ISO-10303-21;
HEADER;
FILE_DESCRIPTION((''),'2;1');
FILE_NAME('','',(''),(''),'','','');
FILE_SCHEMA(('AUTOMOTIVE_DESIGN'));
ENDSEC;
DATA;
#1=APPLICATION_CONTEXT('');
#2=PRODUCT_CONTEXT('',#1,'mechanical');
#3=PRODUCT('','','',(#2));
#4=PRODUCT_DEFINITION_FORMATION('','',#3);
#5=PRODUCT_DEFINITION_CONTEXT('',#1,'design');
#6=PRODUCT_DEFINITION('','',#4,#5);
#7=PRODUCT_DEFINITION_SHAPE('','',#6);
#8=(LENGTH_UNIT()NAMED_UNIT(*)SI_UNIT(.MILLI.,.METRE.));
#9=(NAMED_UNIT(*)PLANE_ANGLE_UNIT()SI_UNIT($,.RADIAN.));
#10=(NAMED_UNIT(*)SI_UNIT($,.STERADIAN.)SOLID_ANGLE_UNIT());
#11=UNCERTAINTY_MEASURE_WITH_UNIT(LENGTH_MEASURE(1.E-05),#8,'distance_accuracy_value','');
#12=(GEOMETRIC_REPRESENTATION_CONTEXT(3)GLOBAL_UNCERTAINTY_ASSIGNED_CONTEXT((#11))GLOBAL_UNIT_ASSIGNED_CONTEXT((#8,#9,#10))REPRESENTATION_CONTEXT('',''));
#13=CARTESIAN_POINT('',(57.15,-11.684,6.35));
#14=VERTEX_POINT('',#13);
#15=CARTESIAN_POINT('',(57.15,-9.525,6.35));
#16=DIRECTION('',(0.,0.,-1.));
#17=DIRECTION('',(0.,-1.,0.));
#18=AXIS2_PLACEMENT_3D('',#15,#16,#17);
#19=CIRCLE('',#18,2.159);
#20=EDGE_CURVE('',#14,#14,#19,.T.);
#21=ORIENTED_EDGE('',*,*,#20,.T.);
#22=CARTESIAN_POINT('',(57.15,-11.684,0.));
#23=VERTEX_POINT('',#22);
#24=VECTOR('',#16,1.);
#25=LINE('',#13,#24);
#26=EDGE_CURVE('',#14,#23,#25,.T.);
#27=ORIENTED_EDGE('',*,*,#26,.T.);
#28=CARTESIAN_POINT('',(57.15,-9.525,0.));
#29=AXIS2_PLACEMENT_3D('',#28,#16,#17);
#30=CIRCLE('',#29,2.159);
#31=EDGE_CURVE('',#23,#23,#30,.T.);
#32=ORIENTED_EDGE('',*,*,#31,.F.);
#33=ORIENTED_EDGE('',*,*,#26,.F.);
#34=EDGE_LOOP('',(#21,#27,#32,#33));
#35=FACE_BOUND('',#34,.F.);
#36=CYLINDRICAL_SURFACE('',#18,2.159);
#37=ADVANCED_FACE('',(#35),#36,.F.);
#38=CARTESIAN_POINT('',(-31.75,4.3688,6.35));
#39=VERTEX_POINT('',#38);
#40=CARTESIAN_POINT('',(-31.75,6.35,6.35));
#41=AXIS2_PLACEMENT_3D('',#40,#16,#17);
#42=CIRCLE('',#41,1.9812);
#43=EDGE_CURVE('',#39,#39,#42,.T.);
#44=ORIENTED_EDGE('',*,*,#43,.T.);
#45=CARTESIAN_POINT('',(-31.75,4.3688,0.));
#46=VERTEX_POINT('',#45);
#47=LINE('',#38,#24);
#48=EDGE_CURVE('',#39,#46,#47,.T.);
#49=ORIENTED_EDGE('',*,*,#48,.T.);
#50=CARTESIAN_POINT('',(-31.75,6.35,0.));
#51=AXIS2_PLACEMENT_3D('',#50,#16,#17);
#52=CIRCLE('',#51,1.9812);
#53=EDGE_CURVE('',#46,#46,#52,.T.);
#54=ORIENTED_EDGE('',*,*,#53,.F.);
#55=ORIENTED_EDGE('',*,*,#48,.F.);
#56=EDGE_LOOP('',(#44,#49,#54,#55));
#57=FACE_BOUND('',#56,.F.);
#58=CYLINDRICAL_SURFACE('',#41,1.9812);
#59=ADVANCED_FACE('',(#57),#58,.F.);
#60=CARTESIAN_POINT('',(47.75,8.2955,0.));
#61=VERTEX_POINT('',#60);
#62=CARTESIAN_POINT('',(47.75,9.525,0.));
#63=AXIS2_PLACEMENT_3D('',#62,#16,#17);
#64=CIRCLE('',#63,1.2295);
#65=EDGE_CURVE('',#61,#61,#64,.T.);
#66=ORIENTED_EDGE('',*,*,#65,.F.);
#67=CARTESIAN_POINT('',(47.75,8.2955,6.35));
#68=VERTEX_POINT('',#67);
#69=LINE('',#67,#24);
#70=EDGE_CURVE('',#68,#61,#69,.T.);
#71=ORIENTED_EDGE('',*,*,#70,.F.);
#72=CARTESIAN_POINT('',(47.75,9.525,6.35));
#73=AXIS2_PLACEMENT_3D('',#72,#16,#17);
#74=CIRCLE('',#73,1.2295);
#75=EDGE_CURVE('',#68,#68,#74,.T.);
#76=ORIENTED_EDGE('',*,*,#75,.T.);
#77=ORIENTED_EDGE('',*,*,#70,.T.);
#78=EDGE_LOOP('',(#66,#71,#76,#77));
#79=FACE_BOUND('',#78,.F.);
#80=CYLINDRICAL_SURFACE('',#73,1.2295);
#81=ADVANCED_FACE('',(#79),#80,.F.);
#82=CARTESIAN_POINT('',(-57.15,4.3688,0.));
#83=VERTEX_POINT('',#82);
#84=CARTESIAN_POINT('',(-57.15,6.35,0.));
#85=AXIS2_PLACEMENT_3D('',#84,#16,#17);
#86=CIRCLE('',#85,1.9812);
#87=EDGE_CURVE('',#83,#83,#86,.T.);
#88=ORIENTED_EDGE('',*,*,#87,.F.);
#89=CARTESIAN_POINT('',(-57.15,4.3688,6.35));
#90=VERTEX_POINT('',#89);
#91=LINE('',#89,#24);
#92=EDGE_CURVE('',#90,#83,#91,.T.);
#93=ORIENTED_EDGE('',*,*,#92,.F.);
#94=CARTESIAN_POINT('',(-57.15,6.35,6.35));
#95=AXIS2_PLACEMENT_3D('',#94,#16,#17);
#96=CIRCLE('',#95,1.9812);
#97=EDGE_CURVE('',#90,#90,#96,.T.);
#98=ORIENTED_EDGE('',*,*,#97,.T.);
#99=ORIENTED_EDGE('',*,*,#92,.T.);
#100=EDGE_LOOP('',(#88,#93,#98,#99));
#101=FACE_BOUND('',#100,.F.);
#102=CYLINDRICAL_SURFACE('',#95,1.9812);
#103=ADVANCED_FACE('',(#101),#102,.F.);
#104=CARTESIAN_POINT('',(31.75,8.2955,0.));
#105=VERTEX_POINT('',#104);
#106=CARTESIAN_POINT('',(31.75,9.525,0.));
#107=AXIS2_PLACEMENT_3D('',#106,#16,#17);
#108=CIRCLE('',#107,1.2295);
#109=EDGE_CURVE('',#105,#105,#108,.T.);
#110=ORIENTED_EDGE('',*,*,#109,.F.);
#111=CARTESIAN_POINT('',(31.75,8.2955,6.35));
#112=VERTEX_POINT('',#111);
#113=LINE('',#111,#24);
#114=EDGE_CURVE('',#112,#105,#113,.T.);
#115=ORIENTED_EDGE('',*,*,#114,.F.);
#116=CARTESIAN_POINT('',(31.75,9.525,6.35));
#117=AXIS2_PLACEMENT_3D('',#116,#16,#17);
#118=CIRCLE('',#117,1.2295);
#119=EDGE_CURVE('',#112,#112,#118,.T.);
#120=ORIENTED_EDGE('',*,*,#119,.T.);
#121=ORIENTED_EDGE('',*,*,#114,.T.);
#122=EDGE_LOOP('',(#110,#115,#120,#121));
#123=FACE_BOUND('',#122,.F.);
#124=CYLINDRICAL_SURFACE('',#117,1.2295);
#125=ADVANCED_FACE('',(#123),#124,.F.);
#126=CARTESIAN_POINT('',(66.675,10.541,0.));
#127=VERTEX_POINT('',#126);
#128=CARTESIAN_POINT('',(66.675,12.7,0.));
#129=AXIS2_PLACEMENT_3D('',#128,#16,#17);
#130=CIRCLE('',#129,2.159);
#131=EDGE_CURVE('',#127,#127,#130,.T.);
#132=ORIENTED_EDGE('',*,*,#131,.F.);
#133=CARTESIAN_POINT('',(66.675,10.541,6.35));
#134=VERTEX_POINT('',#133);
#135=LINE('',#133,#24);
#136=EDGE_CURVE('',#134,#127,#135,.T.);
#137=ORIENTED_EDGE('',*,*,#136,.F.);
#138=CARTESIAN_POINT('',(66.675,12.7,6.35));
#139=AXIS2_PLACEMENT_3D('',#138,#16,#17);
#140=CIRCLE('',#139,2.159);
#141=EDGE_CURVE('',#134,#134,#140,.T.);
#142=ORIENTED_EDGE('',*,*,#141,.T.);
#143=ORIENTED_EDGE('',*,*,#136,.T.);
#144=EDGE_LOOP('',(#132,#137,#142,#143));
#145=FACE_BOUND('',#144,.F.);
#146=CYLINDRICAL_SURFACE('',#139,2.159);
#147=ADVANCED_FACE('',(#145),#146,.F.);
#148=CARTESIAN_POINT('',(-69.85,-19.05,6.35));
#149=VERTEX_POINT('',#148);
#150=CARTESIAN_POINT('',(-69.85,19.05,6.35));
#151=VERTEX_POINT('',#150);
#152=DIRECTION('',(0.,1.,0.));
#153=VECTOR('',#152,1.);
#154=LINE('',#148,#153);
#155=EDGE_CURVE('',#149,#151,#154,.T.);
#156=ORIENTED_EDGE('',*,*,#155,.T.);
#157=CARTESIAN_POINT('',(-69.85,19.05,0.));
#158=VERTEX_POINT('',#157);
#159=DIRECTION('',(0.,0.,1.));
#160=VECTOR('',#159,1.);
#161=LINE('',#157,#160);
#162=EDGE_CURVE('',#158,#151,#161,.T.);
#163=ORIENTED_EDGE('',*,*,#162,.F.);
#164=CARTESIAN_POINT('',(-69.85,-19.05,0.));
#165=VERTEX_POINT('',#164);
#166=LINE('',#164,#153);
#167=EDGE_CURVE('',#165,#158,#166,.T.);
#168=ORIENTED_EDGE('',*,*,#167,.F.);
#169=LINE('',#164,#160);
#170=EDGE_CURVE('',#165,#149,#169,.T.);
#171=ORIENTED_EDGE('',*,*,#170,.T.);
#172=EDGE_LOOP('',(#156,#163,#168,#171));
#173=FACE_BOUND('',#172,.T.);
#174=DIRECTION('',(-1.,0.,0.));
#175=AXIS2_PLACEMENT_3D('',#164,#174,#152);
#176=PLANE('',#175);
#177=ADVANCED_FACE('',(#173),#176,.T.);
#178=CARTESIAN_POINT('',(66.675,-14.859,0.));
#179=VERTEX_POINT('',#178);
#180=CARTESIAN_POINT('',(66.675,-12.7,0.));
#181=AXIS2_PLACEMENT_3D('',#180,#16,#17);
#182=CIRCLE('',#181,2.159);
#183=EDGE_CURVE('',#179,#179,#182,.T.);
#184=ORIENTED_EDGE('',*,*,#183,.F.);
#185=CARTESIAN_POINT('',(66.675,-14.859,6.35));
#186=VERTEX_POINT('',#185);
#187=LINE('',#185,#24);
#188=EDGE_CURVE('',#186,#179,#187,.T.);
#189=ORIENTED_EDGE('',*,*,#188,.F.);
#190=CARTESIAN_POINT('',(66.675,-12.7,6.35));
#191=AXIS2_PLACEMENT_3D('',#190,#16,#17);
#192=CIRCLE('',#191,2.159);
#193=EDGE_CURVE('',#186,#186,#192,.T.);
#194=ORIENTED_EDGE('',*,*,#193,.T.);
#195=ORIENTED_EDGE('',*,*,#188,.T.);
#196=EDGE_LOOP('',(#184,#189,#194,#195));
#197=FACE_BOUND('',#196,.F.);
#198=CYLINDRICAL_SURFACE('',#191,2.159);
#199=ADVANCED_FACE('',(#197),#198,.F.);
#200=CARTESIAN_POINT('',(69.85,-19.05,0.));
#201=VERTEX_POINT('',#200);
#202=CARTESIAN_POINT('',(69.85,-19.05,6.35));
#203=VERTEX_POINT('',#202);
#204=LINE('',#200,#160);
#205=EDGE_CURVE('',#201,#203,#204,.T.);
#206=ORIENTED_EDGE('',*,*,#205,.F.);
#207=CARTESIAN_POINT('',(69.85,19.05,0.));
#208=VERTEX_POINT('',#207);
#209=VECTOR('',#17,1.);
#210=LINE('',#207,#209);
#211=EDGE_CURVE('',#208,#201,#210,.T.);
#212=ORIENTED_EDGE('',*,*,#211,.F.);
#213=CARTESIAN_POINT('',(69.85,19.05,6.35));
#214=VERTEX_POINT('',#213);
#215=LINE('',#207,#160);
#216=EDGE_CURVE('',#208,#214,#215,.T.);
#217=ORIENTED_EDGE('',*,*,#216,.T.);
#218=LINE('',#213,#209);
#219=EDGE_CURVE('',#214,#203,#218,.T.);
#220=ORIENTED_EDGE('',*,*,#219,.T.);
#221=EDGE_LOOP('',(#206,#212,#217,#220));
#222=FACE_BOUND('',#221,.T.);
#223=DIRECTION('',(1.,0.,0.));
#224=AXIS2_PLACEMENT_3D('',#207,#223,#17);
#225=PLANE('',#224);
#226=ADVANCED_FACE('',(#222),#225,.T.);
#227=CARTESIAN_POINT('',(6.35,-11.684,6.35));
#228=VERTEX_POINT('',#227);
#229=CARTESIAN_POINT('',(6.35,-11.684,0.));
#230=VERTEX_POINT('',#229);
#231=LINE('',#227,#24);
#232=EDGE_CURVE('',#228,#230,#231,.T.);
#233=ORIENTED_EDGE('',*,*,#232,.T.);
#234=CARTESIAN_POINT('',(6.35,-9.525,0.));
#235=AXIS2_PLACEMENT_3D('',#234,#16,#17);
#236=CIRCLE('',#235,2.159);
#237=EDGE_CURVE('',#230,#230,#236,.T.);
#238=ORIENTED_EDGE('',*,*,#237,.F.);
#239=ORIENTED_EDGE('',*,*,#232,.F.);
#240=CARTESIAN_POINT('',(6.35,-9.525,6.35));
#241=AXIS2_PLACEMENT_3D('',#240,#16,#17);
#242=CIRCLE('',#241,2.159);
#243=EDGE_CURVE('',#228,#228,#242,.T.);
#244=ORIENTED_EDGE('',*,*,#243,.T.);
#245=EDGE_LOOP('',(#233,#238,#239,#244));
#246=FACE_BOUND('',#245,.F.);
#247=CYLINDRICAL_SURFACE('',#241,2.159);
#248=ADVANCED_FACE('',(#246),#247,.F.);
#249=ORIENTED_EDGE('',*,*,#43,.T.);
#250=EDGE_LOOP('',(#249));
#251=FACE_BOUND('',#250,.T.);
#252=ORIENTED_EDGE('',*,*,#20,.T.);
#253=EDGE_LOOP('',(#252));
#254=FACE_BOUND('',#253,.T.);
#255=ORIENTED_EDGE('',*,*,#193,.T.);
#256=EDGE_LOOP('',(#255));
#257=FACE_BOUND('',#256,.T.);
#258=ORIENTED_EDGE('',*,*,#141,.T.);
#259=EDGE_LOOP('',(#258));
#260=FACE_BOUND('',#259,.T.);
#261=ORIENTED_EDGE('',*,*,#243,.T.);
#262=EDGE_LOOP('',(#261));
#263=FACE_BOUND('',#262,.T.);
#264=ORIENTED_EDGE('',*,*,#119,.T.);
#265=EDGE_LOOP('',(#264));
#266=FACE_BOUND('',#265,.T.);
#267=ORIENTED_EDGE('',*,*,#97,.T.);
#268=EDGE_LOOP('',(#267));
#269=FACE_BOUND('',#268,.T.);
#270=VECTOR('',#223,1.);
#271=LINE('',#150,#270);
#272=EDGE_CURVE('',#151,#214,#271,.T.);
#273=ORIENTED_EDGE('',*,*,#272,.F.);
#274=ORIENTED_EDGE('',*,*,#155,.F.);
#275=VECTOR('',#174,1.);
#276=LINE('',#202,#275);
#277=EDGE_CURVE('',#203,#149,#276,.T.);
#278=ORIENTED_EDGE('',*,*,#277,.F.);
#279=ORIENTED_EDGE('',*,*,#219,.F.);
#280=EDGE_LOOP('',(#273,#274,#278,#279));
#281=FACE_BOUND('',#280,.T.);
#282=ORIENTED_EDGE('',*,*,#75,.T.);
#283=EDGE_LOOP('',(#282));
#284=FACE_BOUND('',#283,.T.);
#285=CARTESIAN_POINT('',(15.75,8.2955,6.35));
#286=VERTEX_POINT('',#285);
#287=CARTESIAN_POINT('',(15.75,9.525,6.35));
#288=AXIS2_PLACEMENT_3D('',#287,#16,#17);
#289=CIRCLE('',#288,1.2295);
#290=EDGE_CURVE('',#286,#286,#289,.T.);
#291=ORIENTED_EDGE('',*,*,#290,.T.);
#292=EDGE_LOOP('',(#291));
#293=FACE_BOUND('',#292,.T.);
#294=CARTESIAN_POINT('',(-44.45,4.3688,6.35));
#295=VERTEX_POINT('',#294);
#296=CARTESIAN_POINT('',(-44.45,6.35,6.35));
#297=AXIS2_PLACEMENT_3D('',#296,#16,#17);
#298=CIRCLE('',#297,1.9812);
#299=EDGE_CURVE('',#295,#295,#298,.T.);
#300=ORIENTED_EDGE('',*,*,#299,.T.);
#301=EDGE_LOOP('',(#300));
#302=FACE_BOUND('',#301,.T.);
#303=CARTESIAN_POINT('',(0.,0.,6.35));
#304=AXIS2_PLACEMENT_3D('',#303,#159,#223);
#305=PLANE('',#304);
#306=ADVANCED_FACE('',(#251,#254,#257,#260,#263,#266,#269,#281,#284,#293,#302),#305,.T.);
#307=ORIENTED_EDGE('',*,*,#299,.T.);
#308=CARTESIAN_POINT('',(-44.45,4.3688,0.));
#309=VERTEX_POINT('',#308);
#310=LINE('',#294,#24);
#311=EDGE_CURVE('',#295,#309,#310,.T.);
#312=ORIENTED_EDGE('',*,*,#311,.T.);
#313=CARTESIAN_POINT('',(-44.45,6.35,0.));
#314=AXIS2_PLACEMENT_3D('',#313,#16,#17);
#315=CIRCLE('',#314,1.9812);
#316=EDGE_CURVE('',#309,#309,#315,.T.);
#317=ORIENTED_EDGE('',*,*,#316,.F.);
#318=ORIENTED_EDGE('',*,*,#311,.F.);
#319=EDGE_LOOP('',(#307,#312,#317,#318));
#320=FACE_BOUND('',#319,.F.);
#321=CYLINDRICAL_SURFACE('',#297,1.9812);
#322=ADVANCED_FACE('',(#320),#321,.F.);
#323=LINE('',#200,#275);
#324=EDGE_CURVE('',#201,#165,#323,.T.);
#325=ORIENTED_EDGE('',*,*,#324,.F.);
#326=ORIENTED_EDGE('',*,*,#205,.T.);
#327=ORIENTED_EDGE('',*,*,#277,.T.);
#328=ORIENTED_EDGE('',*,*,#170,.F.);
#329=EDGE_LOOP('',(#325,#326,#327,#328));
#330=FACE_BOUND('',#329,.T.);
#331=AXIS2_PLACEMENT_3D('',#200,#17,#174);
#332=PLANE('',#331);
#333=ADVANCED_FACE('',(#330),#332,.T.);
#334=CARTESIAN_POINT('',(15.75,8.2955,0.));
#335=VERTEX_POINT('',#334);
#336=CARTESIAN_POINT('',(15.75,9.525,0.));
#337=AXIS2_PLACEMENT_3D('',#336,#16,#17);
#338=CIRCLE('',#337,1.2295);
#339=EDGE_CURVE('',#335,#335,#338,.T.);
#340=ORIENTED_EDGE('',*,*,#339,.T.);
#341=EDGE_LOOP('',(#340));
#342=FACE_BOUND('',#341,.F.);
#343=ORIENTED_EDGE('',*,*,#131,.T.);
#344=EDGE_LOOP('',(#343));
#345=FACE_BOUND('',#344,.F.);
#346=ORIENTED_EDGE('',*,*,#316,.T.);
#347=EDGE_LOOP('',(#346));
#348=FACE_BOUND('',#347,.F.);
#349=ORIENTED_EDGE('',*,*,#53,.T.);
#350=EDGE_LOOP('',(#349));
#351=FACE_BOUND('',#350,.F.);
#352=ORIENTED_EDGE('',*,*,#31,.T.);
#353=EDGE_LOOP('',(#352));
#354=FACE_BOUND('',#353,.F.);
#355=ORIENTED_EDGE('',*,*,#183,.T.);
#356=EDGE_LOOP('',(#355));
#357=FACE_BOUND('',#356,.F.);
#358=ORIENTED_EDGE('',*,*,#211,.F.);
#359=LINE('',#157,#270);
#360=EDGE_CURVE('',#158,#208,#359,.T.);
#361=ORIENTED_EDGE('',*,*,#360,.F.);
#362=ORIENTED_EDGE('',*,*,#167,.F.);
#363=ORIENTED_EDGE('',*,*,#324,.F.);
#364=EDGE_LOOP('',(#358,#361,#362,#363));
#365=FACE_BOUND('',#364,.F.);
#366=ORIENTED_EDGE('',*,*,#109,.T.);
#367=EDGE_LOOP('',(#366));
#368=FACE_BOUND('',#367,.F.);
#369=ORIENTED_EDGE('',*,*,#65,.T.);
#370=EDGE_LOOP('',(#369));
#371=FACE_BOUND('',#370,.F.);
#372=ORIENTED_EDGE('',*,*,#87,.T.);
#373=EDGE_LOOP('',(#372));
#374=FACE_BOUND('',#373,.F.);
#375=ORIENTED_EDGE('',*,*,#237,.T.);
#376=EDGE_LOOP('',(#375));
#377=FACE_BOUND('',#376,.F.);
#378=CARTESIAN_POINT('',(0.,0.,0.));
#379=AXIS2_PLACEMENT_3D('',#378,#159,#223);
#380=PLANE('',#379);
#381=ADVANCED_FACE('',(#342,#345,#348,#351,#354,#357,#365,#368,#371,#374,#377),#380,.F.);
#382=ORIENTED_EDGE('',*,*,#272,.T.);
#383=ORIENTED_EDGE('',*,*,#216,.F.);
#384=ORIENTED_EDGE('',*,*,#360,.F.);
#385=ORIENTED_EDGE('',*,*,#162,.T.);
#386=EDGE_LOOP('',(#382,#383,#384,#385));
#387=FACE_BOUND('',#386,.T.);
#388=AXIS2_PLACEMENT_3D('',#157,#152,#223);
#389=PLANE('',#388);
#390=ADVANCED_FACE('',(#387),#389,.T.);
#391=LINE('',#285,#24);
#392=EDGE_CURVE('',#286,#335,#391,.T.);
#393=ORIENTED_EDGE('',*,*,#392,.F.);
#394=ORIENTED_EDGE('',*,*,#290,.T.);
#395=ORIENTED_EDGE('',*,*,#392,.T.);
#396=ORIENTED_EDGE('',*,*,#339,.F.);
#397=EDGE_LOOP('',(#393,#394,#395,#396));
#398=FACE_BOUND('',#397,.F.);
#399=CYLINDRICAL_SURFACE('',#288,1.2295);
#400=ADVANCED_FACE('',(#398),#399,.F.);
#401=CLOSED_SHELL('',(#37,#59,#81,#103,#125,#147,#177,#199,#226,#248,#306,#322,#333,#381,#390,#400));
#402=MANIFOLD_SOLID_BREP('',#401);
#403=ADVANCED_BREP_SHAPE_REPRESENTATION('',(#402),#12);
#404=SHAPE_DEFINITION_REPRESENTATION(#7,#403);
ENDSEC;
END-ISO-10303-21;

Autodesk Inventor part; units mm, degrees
ref_plane "YZ Plane" through (0, 0, 0) normal (1, 0, 0) x (0, 1, 0)
ref_plane "XZ Plane" through (0, 0, 0) normal (0, 1, 0) x (-1, 0, 0)
ref_plane "XY Plane" through (0, 0, 0) normal (0, 0, 1) x (1, 0, 0)
sketch "Sketch1" plane through (0, 0, 0) normal (0, 0, 1) x (1, 0, 0)
  line L0 (69.85, -19.05) -> (-69.85, -19.05)
  line L1 (-69.85, -19.05) -> (-69.85, 19.05)
  line L2 (-69.85, 19.05) -> (69.85, 19.05)
  line L3 (69.85, 19.05) -> (69.85, -19.05)
  line L4 (69.85, -19.05) -> (-69.85, 19.05) construction
  line L5 (-69.85, -19.05) -> (69.85, 19.05) construction
  point P0 (0, 0)
  dimension "d0" = 139.7
  dimension "d1" = 38.1
extrude "Extrusion1" add sketch "Sketch1" along normal blind 6.35
sketch "Sketch2" plane through (0, 0, 6.35) normal (0, 0, 1) x (1, 0, 0)
  line L0 (-69.85, 19.05) -> (-69.85, -19.05) projected
  line L1 (69.85, 19.05) -> (-69.85, 19.05) projected
  point P0 (0, 0)
  point P1 (-57.15, 6.35)
  point P2 (-44.45, 6.35)
  point P3 (-31.75, 6.35)
  point P4 (-69.85, 0)
  dimension "d5" = 12.7
  dimension "d6" = 12.7
  dimension "d14" = 12.7
  dimension "d15" = 12.7
hole "Hole1" at (-57.15, 6.35, 6.35) at (-44.45, 6.35, 6.35) at (-31.75, 6.35, 6.35) direction (0, 0, -1) diameter 3.9624 end through all thread size "10-32 UNF" class "2B" standard "ANSI Unified Screw Threads"
sketch "Sketch3" plane through (0, 0, 6.35) normal (0, 0, 1) x (1, 0, 0)
  line L0 (69.85, 19.05) -> (-69.85, 19.05) projected
  line L1 (-69.85, -19.05) -> (69.85, -19.05) projected
  line L2 (69.85, -19.05) -> (69.85, 19.05) projected
  line L3 (6.35, -9.525) -> (57.15, -9.525) construction
  line L4 (-69.85, 19.05) -> (-69.85, -19.05) construction
  point P0 (0, 0)
  point P1 (66.675, 12.7)
  point P2 (66.675, -12.7)
  point P3 (-69.85, 0)
  dimension "d16" = 6.35
  dimension "d17" = 6.35
  dimension "d18" = 3.175
  dimension "d39" = 50.8
  dimension "d41" = 28.575
  dimension "d43" = 12.7
hole "Hole2" at (66.675, 12.7, 6.35) at (66.675, -12.7, 6.35) at (6.35, -9.525, 6.35) at (57.15, -9.525, 6.35) direction (0, 0, -1) diameter 4.318 end through all clearance for "Flat Head Machine Screw (82)" size "#8" standard "Ansi Unified Screw Threads"
sketch "Sketch6" plane through (0, 0, 6.35) normal (0, 0, 1) x (1, 0, 0)
  line L0 (47.75, 9.525) -> (15.75, 9.525) construction
  line L1 (69.85, -19.05) -> (69.85, 19.05) construction
  line L2 (-69.85, -19.05) -> (69.85, -19.05) construction
  point P0 (0, 0)
  point P1 (69.85, 0)
  point P2 (69.85, 0)
  point P3 (31.75, 9.525)
  point P4 (31.75, 1.524)
  dimension "d30" = 32
  dimension "d45" = 28.575
  dimension "d46" = 38.1
  dimension "d47" = 8.001
hole "Hole3" at (47.75, 9.525, 6.35) at (15.75, 9.525, 6.35) at (31.75, 9.525, 6.35) direction (0, 0, -1) diameter 2.459 end through all thread size "M3x0.5" class "6H" standard "ANSI Metric M Profile"
equation "\"d5\" = d4"
equation "\"d6\" = d4"
equation "\"d4\" = 12.7"
properties part number "EL2-021" material "Aluminum 6061"
